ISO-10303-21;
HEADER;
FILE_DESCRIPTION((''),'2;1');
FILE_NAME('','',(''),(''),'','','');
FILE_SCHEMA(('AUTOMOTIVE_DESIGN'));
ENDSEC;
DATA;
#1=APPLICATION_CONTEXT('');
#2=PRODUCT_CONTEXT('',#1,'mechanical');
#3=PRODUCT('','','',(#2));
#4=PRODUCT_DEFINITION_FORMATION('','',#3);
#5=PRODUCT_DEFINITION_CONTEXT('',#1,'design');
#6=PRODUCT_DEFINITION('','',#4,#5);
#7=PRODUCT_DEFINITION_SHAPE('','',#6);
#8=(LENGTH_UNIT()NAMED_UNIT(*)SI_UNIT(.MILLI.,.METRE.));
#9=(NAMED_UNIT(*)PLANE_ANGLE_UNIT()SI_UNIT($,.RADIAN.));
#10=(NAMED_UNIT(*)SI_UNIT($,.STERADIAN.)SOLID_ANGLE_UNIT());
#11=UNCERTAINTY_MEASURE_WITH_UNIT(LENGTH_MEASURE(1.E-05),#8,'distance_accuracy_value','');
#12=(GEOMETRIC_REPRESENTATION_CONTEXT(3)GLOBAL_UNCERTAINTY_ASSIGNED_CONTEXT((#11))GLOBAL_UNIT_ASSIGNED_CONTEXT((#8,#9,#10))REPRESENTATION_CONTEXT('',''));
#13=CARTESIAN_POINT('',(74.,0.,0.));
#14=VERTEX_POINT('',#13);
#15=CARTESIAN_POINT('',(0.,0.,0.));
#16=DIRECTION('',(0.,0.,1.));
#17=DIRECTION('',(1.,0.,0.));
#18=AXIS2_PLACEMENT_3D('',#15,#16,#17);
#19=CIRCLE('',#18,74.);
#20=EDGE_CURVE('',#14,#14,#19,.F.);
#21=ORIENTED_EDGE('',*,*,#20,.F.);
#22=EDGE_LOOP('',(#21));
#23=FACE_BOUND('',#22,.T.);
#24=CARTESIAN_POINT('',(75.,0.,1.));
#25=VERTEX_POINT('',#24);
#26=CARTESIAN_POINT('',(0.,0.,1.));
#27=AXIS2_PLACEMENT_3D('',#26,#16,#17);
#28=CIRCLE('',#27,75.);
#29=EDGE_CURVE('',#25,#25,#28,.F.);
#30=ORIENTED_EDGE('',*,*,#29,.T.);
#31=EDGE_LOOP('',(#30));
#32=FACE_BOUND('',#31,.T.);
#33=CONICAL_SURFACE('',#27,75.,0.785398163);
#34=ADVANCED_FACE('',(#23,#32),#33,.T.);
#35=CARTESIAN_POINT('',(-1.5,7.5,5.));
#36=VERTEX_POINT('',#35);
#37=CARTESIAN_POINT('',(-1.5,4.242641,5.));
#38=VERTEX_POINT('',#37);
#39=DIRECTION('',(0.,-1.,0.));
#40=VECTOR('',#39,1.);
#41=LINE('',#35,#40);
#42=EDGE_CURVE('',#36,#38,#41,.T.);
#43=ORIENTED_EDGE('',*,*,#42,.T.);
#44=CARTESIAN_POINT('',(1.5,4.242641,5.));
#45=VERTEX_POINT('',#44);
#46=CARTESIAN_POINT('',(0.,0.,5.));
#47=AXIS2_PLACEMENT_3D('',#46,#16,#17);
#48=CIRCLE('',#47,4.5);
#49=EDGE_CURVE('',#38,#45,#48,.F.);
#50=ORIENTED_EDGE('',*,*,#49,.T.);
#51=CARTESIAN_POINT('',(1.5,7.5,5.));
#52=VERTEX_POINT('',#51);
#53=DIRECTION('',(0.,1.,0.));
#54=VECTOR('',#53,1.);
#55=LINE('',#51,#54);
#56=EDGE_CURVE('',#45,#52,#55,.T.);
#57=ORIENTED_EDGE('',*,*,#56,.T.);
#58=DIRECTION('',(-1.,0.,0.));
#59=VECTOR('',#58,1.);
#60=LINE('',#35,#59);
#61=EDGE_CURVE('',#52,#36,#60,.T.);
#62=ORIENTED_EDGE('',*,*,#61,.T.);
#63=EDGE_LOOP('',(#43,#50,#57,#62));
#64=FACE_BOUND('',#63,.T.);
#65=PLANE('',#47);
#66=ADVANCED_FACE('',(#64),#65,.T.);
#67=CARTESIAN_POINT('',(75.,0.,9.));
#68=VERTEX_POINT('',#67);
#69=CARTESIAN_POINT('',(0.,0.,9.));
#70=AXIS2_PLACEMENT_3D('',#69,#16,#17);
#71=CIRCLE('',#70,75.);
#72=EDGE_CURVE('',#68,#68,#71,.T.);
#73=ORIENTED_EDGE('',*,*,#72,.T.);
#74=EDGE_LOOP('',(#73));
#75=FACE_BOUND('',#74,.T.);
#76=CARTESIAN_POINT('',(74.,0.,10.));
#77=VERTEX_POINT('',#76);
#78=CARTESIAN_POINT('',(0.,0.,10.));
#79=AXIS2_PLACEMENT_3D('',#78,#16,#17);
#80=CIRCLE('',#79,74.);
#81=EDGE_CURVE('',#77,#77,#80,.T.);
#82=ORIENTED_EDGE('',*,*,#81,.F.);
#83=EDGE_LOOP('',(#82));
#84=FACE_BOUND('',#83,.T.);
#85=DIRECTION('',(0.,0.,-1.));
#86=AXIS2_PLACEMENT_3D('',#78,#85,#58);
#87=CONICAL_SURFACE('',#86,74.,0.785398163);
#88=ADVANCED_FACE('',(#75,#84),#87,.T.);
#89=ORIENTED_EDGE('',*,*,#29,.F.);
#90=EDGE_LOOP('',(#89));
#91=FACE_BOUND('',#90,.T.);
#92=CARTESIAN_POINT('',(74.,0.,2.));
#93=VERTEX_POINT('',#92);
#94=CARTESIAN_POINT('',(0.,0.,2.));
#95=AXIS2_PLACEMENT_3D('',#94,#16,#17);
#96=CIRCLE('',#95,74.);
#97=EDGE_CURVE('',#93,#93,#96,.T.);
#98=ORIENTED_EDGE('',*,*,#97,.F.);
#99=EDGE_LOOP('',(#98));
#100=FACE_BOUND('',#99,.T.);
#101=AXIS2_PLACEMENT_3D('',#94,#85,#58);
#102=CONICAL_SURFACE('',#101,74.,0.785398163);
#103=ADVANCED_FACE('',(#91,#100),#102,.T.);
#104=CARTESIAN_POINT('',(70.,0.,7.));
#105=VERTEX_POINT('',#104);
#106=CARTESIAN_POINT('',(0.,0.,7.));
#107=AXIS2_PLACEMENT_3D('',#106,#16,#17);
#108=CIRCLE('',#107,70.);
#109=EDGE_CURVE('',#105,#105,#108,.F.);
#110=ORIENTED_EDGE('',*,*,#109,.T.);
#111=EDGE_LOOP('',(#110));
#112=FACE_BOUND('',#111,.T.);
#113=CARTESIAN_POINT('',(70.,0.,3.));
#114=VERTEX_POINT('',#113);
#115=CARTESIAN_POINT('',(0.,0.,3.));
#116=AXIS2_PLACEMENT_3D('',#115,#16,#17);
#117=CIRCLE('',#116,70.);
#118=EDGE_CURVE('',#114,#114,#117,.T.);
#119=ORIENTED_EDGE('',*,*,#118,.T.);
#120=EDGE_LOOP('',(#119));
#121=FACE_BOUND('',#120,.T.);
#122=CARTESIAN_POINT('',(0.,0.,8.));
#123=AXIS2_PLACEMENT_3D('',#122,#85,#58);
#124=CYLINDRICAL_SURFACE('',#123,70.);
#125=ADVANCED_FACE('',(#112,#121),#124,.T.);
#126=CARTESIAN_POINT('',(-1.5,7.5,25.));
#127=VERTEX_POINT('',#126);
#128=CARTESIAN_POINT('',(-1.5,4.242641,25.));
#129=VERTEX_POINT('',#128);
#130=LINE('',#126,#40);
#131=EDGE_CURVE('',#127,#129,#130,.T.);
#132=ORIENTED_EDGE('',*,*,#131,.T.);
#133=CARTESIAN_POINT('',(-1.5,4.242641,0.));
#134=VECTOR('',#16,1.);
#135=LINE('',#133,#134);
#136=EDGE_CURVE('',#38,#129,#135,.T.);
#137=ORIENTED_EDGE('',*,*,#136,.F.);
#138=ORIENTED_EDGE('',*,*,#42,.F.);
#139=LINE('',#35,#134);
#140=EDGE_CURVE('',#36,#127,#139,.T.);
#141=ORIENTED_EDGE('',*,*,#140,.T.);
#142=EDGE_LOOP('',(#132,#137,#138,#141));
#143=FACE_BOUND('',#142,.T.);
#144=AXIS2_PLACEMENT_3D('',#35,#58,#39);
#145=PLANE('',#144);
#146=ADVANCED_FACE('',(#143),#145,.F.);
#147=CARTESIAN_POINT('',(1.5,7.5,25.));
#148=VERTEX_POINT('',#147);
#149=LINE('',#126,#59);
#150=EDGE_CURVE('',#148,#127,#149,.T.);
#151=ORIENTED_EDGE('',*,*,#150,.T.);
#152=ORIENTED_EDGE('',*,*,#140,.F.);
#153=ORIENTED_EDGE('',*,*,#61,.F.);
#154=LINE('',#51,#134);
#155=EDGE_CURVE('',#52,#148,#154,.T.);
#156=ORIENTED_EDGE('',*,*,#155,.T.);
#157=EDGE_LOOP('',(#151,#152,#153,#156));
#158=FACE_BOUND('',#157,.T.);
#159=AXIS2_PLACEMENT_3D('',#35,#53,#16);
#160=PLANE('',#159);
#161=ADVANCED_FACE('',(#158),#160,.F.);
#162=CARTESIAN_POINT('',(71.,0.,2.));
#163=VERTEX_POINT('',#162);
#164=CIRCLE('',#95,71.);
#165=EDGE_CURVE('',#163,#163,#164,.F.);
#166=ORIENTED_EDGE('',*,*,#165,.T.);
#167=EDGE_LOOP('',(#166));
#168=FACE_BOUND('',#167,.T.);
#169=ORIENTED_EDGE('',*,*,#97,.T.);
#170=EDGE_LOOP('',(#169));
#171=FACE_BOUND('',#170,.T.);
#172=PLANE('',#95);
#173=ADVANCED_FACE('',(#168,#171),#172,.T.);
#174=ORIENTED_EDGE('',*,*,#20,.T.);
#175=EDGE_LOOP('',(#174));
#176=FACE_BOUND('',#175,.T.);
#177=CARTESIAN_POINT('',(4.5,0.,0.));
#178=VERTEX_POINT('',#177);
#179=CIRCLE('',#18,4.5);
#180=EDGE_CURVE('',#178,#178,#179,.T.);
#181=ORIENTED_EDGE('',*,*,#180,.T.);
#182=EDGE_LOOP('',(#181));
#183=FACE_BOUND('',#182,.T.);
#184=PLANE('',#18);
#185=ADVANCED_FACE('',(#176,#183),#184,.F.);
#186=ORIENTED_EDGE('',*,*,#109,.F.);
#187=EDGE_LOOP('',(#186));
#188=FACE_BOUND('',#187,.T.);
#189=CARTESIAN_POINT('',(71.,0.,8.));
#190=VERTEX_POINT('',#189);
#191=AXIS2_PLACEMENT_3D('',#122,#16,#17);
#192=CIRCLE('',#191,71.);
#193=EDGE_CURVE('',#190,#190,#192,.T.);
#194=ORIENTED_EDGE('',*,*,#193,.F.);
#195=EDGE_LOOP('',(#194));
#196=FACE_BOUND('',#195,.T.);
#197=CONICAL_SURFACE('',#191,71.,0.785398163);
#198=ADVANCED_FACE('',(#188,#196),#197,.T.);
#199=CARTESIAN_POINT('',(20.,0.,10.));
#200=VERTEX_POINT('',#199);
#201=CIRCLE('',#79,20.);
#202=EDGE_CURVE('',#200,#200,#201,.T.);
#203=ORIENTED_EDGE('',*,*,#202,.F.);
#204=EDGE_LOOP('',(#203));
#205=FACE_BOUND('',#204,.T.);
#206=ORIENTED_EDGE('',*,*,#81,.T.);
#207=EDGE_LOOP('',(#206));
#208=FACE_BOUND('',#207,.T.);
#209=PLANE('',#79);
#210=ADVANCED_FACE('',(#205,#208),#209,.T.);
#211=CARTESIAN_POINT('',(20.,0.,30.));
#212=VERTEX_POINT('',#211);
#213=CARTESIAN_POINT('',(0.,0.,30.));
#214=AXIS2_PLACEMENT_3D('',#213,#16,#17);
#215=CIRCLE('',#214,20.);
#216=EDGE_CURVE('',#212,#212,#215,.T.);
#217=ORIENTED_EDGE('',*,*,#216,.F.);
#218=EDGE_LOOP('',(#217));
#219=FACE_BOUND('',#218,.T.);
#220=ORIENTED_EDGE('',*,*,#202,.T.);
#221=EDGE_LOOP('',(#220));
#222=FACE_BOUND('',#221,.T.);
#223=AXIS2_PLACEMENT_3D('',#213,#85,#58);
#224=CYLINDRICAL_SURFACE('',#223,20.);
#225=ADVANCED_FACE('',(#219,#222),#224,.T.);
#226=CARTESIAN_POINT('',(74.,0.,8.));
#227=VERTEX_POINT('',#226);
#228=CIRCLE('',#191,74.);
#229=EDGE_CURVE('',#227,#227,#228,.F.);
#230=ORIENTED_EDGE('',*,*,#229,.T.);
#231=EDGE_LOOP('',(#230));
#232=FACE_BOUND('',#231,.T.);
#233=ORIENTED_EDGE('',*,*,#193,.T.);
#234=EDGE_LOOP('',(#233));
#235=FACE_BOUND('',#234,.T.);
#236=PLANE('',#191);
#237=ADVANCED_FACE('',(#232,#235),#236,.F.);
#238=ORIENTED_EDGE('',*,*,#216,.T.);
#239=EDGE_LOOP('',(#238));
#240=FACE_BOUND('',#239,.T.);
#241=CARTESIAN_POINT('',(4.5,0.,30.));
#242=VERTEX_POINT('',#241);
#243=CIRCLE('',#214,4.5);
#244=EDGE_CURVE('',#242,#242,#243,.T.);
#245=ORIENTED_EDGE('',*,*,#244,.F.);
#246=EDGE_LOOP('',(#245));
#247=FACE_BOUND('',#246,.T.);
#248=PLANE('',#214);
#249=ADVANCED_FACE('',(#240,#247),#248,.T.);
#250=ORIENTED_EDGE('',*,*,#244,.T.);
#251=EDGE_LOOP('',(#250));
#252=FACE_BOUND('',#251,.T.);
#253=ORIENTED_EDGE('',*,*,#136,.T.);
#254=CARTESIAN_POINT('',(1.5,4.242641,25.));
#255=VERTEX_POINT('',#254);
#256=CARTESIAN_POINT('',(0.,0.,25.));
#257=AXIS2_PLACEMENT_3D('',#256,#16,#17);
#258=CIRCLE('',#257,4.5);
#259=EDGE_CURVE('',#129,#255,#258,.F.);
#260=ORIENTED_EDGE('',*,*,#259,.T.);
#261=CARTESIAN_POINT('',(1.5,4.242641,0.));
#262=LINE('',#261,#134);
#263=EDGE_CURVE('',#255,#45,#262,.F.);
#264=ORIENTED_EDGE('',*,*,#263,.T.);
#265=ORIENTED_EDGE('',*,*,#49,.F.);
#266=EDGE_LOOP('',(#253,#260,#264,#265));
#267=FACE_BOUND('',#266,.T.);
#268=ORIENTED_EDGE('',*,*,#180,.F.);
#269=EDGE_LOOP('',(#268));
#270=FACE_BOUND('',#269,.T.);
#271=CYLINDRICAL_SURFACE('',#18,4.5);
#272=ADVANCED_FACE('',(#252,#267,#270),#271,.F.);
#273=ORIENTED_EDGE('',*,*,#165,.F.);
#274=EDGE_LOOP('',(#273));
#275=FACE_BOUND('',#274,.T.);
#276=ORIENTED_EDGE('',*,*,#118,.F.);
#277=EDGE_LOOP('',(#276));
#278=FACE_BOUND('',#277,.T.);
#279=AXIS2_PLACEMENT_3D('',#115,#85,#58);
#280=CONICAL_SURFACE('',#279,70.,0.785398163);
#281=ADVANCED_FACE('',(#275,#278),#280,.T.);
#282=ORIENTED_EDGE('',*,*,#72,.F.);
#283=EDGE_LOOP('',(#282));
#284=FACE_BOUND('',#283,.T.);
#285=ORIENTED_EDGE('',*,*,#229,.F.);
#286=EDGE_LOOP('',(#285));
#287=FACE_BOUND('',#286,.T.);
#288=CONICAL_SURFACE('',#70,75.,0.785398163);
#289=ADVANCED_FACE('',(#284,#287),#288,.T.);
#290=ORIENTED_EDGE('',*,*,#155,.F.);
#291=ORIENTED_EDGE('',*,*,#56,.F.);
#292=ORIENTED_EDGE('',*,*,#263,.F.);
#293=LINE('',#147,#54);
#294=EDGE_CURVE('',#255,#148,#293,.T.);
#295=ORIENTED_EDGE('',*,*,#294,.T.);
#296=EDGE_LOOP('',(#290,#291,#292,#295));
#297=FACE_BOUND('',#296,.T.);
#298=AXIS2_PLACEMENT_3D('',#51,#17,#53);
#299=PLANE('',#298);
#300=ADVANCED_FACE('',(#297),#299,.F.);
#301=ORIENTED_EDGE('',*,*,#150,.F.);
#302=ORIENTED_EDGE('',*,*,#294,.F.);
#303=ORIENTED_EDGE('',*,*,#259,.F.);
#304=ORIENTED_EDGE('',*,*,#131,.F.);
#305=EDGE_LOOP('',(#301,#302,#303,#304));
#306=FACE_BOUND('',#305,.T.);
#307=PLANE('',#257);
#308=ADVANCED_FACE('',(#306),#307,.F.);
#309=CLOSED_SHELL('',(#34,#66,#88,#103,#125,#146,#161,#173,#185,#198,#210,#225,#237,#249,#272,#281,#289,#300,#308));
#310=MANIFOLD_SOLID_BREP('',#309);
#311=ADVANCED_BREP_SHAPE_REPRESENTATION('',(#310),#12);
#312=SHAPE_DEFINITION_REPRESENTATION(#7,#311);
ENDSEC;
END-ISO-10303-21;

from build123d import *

# Parameters (mm, degrees)
SKETCH1_R           = 75
BOSS_EXTRUDE1_DEPTH = 2
SKETCH2_R           = 70
BOSS_EXTRUDE2_DEPTH = 6
SKETCH3_R           = 75
BOSS_EXTRUDE3_DEPTH = 2
CHAMFER1_SIZE       = 1
CHAMFER2_SIZE       = 1
SKETCH4_R           = 20
BOSS_EXTRUDE5_DEPTH = 20
SKETCH5_R           = 4.5
CUT_EXTRUDE1_DEPTH  = 111.227038425
CUT_EXTRUDE2_START  = -5
SKETCH6_W           = 3
SKETCH6_H           = 6
CUT_EXTRUDE2_DEPTH  = 20


with BuildPart() as part:
    # Sketch1 → Boss-Extrude1 (new body)
    with BuildSketch(Plane.XY):
        Circle(SKETCH1_R)
    extrude(amount=BOSS_EXTRUDE1_DEPTH)

    # Sketch2 → Boss-Extrude2 (add)
    with BuildSketch(Plane.XY.offset(2)):
        Circle(SKETCH2_R)
    extrude(amount=BOSS_EXTRUDE2_DEPTH)

    # Sketch3 → Boss-Extrude3 (add)
    with BuildSketch(Plane.XY.offset(8)):
        Circle(SKETCH3_R)
    extrude(amount=BOSS_EXTRUDE3_DEPTH)

    # Chamfer1
    chamfer1_edges = [part.edges().sort_by_distance(p)[0] for p in [
        (-75, 0, 0),
        (-75, 0, 2),
        (-70, 0, 2),
    ]]
    chamfer(chamfer1_edges, length=CHAMFER1_SIZE - 0.0001)  # a hair under: the kernel refuses the full size

    # Chamfer2
    chamfer2_edges = [part.edges().sort_by_distance(p)[0] for p in [
        (-75, 0, 8),
        (-75, 0, 10),
        (-70, 0, 8),
    ]]
    chamfer(chamfer2_edges, length=CHAMFER2_SIZE - 0.0001)  # a hair under: the kernel refuses the full size

    # Sketch4 → Boss-Extrude5 (add)
    with BuildSketch(Plane.XY.offset(10)):
        Circle(SKETCH4_R)
    extrude(amount=BOSS_EXTRUDE5_DEPTH)

    # Sketch5 → Cut-Extrude1 (cut, through all)
    with BuildSketch(Plane.XY.offset(30)):
        Circle(SKETCH5_R)
    extrude(amount=-CUT_EXTRUDE1_DEPTH, mode=Mode.SUBTRACT)

    # Sketch6 → Cut-Extrude2 (cut)
    with BuildSketch(Plane.XY.offset(30).offset(CUT_EXTRUDE2_START)):
        with Locations((0, 4.5)):
            Rectangle(SKETCH6_W, SKETCH6_H)
    extrude(amount=-CUT_EXTRUDE2_DEPTH, mode=Mode.SUBTRACT)


solid = part.part
